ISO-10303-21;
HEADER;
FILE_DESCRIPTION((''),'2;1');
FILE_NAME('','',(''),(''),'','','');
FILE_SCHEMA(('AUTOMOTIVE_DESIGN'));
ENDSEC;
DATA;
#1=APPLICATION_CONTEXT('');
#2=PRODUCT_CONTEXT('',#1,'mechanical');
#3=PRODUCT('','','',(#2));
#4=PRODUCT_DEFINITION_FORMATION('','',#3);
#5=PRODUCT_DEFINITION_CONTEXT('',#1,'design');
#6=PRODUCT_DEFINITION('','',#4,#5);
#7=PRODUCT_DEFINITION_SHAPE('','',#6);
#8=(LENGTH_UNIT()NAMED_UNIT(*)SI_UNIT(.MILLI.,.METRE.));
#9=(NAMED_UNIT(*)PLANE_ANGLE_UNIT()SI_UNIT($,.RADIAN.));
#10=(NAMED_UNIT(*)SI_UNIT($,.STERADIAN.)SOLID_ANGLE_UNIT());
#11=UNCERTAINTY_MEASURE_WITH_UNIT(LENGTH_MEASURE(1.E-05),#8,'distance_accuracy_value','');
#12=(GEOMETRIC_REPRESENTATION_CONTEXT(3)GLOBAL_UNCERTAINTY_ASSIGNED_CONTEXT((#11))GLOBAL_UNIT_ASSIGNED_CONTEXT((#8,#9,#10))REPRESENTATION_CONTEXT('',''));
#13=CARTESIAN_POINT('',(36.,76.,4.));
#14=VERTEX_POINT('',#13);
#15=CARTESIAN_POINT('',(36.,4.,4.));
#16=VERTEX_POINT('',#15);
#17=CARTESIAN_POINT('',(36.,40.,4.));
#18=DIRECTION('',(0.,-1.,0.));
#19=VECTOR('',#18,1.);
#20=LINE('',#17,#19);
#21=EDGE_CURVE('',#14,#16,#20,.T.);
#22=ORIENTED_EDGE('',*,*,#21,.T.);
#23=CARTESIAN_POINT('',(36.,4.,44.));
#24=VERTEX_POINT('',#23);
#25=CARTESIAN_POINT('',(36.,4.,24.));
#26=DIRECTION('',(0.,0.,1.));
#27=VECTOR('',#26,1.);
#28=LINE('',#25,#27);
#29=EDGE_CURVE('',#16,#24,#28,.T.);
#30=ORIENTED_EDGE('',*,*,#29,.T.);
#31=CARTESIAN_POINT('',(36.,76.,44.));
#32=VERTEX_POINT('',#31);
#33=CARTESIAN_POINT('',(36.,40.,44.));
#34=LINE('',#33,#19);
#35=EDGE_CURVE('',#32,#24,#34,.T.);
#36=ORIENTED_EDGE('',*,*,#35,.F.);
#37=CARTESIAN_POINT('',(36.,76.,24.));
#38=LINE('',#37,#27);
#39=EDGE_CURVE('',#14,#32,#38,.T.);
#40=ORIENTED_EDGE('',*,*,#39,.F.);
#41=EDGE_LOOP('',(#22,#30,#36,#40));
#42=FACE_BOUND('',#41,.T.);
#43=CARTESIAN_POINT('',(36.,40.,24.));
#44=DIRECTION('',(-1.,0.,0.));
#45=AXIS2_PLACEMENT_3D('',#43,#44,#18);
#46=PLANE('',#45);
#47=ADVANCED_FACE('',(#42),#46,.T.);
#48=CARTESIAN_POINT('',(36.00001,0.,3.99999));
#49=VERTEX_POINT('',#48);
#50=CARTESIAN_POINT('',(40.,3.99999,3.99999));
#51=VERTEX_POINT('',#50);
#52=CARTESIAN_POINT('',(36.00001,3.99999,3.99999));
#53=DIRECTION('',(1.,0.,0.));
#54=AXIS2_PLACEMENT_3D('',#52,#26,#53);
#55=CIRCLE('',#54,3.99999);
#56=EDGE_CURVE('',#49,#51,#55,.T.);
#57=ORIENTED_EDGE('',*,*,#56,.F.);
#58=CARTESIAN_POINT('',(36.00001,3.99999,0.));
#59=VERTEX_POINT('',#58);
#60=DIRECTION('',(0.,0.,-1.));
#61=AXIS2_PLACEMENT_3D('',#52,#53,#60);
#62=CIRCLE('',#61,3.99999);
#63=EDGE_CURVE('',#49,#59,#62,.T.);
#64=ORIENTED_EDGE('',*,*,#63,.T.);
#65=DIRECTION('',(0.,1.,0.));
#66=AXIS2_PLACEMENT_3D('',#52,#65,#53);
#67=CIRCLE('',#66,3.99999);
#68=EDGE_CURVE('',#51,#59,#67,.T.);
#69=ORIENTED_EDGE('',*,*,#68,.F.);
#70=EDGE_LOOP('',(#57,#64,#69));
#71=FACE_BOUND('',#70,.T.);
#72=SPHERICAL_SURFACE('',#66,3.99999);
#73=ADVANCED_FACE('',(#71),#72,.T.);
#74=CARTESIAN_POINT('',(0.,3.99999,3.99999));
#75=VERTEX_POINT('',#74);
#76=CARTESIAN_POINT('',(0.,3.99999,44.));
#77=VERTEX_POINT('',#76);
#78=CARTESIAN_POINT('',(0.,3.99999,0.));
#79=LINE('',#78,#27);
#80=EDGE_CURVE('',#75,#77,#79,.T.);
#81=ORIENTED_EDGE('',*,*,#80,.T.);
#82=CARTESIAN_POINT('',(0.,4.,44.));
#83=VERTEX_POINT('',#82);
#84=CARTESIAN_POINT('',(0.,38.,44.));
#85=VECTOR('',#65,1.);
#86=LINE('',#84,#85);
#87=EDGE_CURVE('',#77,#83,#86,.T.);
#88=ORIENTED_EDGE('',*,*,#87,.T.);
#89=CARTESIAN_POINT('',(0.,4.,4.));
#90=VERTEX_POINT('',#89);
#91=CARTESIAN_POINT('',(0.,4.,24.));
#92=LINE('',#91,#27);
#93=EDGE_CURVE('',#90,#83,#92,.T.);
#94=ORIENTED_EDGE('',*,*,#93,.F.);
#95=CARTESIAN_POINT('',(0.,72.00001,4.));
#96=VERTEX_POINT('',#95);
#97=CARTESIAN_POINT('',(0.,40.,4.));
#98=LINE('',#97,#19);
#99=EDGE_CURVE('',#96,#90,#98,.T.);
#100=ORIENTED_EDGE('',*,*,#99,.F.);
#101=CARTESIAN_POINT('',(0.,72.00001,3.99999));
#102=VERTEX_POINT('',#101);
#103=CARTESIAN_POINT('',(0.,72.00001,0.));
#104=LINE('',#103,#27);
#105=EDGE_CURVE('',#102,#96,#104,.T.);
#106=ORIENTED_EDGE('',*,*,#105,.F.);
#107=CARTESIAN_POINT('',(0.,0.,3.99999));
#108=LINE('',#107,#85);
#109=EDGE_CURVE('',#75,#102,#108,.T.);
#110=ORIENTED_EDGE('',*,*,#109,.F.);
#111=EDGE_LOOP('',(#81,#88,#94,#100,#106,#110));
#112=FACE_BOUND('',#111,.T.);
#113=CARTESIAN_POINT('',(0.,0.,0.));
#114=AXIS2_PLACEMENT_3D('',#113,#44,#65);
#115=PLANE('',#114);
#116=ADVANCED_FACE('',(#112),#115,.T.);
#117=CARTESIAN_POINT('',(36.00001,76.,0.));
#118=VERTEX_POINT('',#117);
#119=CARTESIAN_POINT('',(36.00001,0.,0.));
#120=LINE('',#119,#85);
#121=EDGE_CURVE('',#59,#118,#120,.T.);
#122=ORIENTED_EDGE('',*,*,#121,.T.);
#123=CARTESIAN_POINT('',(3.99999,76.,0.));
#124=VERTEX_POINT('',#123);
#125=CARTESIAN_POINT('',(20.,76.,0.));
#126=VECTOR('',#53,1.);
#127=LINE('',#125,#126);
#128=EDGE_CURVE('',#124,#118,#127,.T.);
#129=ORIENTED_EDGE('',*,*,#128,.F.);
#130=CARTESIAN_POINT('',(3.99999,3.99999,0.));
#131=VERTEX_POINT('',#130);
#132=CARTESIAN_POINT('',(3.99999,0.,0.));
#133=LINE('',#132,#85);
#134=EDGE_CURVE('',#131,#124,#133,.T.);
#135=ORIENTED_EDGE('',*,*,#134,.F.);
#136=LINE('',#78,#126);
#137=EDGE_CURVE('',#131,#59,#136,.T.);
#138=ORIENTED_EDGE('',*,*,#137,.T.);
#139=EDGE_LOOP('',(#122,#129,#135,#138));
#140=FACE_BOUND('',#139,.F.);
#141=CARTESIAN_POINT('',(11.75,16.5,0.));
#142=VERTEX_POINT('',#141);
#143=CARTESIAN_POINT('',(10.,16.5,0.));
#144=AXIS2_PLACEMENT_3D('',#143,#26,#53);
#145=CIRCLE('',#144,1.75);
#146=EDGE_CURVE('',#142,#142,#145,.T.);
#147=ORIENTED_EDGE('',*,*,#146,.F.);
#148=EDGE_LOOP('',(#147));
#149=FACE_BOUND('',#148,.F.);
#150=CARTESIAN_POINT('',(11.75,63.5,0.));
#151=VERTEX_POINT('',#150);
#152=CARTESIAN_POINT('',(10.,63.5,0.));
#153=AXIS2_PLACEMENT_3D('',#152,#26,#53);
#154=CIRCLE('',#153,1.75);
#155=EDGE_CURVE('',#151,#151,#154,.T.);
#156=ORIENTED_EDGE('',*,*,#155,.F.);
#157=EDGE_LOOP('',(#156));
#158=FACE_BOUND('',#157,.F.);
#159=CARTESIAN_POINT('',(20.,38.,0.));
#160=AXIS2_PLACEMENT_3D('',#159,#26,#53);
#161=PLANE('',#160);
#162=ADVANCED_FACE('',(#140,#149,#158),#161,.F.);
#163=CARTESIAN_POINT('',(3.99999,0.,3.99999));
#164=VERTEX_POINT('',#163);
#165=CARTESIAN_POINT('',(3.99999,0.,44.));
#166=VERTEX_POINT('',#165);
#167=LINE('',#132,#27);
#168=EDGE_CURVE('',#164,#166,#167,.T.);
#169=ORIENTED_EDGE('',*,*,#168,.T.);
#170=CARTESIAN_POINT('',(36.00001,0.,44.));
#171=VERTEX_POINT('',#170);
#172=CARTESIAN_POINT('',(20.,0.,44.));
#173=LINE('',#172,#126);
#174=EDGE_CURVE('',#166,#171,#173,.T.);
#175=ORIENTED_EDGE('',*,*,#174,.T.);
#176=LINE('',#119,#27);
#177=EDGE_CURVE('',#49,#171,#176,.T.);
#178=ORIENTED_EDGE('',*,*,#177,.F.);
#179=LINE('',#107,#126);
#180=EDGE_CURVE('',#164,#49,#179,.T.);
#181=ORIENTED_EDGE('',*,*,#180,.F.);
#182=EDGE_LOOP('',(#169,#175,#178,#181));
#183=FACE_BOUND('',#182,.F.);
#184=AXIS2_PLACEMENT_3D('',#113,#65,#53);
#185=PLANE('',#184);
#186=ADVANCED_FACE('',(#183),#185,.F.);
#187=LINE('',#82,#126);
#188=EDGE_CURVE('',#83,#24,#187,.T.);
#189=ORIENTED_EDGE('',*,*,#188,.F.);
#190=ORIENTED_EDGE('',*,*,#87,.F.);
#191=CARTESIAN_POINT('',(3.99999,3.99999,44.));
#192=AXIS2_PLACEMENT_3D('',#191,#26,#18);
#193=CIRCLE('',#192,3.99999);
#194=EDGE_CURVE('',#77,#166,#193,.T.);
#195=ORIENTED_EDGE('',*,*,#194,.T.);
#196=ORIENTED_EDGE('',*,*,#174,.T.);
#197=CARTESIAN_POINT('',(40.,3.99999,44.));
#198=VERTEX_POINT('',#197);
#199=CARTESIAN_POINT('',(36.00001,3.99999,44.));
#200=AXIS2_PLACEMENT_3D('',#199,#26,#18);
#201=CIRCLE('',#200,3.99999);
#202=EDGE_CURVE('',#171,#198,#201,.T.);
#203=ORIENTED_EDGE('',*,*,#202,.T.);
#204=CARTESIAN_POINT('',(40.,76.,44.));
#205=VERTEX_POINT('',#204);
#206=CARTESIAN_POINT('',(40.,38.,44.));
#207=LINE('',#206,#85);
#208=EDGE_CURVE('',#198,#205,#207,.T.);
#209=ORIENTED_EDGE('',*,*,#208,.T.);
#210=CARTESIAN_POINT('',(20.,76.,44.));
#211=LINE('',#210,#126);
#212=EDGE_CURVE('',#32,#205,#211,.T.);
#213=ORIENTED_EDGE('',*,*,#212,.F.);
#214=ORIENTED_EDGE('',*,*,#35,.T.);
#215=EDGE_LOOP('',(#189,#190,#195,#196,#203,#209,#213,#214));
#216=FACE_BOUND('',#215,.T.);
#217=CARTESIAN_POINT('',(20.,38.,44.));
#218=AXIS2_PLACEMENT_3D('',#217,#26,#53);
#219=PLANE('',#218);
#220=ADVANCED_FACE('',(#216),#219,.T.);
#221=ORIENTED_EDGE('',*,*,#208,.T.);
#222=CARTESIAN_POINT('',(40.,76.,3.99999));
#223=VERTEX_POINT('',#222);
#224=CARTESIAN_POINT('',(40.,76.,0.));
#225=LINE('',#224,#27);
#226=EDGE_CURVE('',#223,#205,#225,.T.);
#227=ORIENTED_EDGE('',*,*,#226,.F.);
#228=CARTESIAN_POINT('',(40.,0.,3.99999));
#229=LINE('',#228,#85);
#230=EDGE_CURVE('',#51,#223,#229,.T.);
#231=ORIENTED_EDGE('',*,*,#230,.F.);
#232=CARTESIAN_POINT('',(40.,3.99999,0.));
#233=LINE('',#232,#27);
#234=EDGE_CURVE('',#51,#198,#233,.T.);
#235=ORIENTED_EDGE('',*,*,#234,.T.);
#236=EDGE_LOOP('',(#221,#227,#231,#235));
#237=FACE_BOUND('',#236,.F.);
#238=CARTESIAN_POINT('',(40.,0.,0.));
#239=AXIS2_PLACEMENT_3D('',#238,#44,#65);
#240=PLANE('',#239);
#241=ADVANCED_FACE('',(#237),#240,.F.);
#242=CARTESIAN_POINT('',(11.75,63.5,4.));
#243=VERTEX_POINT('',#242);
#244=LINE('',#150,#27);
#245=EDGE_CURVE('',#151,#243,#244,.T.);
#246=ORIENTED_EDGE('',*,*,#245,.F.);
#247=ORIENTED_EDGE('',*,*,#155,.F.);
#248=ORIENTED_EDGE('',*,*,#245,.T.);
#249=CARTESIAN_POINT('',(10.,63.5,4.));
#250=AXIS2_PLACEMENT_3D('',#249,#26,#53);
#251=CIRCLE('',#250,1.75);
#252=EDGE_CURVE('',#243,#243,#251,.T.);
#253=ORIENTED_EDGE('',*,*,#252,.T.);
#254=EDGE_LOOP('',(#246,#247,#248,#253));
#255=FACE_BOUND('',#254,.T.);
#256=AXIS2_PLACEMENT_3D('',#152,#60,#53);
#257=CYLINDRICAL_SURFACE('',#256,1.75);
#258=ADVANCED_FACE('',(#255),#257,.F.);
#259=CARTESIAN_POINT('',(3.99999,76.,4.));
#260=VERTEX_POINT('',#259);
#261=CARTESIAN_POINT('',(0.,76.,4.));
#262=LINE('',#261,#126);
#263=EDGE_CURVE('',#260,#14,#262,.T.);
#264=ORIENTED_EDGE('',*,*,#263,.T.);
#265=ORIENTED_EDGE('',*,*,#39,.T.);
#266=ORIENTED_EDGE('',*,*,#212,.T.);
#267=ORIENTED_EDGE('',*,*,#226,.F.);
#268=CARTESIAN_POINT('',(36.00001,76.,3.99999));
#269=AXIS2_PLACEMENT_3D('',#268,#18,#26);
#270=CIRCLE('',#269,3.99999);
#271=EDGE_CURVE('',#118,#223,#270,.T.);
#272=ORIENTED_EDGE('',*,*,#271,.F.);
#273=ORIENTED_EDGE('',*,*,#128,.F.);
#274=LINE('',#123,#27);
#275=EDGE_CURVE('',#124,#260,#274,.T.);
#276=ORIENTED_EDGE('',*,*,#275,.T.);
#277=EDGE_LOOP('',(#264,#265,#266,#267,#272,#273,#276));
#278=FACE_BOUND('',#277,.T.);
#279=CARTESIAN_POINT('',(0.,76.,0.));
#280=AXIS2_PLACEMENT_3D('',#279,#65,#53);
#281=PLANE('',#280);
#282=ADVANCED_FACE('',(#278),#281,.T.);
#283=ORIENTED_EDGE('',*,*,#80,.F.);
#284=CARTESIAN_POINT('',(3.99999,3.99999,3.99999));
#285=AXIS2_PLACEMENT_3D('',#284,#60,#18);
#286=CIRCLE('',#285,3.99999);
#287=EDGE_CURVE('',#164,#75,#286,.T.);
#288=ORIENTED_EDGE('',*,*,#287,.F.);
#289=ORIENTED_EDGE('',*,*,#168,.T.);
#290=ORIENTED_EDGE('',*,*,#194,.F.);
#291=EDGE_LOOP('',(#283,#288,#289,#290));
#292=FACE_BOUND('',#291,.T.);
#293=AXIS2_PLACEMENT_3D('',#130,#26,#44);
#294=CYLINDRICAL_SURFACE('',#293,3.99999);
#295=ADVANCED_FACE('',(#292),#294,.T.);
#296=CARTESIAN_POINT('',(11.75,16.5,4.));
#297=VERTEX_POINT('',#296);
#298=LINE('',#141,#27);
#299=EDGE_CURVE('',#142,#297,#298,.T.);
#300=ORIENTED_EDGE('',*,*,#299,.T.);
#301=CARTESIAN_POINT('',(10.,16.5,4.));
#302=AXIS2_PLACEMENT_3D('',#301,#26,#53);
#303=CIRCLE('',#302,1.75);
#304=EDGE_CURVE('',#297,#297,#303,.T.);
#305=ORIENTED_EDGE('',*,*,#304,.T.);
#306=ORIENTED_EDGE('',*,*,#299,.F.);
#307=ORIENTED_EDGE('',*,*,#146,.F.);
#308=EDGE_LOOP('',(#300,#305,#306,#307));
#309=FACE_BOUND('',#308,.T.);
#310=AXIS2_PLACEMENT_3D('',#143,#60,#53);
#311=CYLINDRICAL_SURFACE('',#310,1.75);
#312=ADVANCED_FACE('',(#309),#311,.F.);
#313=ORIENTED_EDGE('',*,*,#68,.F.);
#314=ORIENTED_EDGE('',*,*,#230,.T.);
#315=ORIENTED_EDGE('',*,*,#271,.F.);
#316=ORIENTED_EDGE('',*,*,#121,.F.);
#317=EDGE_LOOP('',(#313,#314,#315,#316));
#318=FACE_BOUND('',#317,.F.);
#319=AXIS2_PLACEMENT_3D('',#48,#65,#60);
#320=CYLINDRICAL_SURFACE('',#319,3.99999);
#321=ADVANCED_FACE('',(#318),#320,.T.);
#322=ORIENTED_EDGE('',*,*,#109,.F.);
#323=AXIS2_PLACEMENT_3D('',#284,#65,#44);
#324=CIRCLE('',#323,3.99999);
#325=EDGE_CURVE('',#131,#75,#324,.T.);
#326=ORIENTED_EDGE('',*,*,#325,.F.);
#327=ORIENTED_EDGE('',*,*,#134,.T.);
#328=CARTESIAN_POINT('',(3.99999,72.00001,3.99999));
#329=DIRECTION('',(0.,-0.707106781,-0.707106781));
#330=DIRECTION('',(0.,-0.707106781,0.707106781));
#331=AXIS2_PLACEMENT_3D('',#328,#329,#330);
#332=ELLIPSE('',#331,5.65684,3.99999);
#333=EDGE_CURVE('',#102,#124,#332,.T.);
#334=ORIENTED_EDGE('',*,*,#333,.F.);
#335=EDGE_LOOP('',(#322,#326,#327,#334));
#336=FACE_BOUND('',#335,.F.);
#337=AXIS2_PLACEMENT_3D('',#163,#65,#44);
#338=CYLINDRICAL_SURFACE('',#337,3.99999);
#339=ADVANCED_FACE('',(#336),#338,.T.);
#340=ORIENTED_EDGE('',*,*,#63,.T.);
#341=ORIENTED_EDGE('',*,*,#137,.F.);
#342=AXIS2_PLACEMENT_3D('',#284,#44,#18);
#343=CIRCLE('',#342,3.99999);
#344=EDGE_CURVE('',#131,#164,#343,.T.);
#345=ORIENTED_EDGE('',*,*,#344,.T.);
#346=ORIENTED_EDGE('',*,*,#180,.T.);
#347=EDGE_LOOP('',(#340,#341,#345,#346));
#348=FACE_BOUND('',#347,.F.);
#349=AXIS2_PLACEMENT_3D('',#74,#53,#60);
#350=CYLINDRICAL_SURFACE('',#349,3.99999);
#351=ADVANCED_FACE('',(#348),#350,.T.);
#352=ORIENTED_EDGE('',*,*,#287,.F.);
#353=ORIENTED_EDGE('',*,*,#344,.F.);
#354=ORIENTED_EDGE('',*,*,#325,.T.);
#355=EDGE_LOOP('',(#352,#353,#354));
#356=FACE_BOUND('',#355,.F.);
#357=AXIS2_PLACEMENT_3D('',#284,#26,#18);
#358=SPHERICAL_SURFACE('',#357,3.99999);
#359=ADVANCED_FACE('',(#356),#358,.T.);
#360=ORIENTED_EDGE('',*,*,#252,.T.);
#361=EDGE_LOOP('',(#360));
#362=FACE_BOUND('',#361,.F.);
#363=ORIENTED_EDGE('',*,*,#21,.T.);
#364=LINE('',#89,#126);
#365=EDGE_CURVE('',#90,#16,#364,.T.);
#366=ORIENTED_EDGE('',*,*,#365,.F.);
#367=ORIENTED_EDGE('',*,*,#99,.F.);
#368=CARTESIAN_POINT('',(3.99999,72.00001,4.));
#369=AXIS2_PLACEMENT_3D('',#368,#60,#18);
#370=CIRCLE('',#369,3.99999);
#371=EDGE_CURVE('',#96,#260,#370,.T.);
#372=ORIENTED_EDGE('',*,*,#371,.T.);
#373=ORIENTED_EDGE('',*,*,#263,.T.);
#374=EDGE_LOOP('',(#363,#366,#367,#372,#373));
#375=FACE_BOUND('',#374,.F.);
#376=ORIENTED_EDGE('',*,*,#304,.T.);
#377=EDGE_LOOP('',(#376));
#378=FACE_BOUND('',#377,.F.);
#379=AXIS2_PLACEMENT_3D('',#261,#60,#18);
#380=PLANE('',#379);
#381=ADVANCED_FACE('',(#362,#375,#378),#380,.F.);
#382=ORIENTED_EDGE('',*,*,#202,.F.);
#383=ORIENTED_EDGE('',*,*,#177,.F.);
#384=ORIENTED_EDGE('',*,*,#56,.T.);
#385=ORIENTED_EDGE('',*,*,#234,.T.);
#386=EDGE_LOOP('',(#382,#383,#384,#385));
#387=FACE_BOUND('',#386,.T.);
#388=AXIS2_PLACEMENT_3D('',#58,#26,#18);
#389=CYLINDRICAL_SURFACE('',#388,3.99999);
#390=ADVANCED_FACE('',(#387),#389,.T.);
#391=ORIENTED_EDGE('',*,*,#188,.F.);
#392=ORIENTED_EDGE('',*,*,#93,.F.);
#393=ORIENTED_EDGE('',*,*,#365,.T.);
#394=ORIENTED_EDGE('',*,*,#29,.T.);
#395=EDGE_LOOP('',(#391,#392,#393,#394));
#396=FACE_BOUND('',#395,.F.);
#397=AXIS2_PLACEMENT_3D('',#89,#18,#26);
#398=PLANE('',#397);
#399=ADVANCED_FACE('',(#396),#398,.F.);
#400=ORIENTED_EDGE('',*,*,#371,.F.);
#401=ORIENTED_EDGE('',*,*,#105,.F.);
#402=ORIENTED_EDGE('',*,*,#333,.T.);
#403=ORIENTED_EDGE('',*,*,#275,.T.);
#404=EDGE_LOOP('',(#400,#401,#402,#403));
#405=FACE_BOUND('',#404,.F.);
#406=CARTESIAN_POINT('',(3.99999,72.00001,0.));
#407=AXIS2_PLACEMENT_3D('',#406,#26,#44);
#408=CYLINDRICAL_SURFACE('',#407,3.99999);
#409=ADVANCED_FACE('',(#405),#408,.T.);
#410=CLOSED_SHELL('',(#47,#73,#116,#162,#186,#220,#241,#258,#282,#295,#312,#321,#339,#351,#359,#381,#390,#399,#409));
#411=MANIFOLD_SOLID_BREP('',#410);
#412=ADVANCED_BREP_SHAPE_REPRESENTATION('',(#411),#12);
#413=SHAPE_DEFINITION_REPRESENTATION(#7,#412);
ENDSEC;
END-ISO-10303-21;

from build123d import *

# Parameters (mm, degrees)
F0_W     = 40
F0_H     = 76
F0_R     = 1.75
F1_DEPTH = 44
F2_W     = 72
F2_H     = 40
F3_DEPTH = 36
F4_R     = 1.5
F5_DEPTH = 4
F6_DEPTH = 4
F7_R     = 3.99999


# Not quite as in the source:
# - a fillet or chamfer is up to 0.001 mm smaller than in the source, because OpenCascade refuses the exact size


with BuildPart() as f1:
    # F0 (on Top) → F1 (new body)
    with BuildSketch(Plane.XY):
        with Locations((20, 38)):
            Rectangle(F0_W, F0_H)
        with Locations((10, 16.5)):
            Circle(F0_R, mode=Mode.SUBTRACT)
        with Locations((10, 63.5)):
            Circle(F0_R, mode=Mode.SUBTRACT)
        with Locations((10, 63.5)):
            Circle(F0_R)
        with Locations((10, 16.5)):
            Circle(F0_R)
    extrude(amount=F1_DEPTH)

    # F2 (on face) → F3 (cut)
    with BuildSketch(Plane(origin=(0, 0, 0), x_dir=(0, -1, 0), z_dir=(-1, 0, 0))):
        with Locations((-40, 24)):
            Rectangle(F2_W, F2_H)
    extrude(amount=-F3_DEPTH, mode=Mode.SUBTRACT)

    # F4 (on face) → F5 (cut)
    with BuildSketch(Plane(origin=(0, 76, 0), x_dir=(-1, 0, 0), z_dir=(0, 1, 0))):
        with BuildLine():
            ThreePointArc((-29.5, 18.5), (-26.6715728753, 19.6715728753), (-25.5, 22.5))
            ThreePointArc((-25.5, 22.5), (-26.6715728753, 25.3284271247), (-29.5, 26.5))
            ThreePointArc((-29.5, 26.5), (-33.5, 22.5), (-29.5, 18.5))
        make_face()
        with Locations((-12, 23.5)):
            Circle(F4_R)
    extrude(amount=-F5_DEPTH, mode=Mode.SUBTRACT)

    # F0 (on Top) → F6 (cut)
    with BuildSketch(Plane.XY):
        with Locations((10, 63.5)):
            Circle(F0_R)
        with Locations((10, 16.5)):
            Circle(F0_R)
    extrude(amount=F6_DEPTH, mode=Mode.SUBTRACT)

    # F7 (radius 4 in the source; OpenCascade refuses exactly that, so slightly less here)
    f7_edges = [f1.edges().sort_by_distance(p)[0] for p in [
        (40, 38, 0),
        (40, 0, 22),
        (0, 0, 22),
        (20, 0, 0),
        (0, 76, 2),
        (0, 38, 0),
    ]]
    fillet(f7_edges, radius=F7_R)


solid = f1.part
